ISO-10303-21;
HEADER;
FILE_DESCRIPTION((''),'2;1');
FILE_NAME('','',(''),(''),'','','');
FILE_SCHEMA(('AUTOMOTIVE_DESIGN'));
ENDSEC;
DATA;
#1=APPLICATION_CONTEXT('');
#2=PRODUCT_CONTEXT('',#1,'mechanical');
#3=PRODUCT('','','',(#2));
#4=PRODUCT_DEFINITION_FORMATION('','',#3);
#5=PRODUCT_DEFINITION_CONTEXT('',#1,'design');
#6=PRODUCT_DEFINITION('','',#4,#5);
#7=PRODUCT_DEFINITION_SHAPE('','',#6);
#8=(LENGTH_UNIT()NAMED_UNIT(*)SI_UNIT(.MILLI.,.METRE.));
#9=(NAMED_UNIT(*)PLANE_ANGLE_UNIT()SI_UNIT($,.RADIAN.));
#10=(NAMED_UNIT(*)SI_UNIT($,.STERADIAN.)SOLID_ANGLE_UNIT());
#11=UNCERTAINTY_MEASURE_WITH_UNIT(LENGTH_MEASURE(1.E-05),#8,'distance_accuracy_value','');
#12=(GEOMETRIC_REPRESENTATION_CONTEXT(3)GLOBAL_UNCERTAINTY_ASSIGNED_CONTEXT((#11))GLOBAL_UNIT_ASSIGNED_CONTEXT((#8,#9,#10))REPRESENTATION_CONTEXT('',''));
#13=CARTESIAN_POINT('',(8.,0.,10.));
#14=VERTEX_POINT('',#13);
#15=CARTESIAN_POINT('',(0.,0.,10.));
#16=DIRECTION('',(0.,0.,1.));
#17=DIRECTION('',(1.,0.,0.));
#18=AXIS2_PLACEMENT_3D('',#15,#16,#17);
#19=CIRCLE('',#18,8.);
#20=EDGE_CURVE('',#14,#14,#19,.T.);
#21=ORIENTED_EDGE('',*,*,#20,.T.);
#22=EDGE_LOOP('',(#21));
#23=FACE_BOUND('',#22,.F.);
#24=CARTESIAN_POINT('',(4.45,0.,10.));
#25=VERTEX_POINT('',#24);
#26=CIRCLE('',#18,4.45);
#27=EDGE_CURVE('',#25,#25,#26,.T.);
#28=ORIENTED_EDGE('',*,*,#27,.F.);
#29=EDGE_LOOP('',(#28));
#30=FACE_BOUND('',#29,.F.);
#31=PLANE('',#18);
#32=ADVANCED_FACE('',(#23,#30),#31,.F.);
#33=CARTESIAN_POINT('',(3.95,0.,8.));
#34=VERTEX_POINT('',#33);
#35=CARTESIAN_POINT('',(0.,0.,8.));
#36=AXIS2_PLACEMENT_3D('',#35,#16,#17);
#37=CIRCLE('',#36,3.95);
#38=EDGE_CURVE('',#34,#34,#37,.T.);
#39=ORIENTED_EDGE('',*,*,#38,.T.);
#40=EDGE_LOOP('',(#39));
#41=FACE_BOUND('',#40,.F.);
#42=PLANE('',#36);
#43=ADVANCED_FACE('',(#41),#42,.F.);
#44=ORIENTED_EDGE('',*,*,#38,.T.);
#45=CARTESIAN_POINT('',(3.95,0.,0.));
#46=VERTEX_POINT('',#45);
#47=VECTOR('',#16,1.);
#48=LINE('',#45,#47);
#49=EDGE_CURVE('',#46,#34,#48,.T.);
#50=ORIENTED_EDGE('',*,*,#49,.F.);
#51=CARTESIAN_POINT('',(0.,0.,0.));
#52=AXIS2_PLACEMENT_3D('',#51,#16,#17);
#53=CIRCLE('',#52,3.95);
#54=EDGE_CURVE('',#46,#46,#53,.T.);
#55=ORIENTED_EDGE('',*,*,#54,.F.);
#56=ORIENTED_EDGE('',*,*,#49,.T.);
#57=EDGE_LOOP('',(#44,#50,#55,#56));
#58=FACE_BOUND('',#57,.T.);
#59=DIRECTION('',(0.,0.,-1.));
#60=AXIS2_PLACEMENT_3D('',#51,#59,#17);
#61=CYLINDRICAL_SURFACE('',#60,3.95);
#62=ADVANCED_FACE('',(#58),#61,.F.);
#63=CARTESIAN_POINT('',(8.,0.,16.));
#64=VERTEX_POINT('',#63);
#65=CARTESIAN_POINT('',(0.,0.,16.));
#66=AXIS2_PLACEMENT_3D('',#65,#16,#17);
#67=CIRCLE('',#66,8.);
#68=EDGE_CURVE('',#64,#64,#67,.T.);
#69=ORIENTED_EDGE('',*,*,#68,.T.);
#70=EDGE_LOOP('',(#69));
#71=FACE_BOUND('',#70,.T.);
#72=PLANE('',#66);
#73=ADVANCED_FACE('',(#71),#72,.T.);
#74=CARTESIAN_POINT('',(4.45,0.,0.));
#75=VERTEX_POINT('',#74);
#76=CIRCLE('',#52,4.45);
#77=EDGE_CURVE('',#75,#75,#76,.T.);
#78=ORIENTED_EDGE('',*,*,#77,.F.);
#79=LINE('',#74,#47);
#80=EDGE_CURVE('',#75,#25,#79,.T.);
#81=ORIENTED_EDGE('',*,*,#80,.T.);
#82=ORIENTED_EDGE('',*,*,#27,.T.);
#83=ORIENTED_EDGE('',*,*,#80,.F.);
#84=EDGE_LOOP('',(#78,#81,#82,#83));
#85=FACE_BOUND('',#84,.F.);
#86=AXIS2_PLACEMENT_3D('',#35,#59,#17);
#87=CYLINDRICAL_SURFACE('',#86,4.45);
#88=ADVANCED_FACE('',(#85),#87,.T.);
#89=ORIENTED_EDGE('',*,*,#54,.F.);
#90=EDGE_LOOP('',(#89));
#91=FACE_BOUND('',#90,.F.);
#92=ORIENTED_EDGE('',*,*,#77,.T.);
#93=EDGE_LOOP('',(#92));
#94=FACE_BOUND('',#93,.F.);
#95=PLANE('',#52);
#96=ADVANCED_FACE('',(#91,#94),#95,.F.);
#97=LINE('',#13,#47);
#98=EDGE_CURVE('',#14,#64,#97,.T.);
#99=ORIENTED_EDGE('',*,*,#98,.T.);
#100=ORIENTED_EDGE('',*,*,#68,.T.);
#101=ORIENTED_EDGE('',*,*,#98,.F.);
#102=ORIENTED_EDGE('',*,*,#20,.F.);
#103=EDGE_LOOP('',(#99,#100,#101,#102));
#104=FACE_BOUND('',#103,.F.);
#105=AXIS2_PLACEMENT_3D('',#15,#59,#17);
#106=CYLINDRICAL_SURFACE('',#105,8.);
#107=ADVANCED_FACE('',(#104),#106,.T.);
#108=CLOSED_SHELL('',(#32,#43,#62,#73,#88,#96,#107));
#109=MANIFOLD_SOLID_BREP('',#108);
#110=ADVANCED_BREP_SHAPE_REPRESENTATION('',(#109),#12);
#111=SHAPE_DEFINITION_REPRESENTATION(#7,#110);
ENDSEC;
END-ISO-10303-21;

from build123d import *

# Parameters (mm, degrees)
F0_R     = 4.45
F0_R_2   = 3.95
F1_DEPTH = 8
F2_R     = 4.45
F3_DEPTH = 2
F4_R     = 8
F5_DEPTH = 6


# Not quite as in the source:
# - a feature names something its author has since deleted; it is built from what else it names


with BuildPart() as f1:
    # F0 (on Top) → F1 (new body)
    with BuildSketch(Plane.XY):
        Circle(F0_R)
        Circle(F0_R_2, mode=Mode.SUBTRACT)
    extrude(amount=F1_DEPTH)

    # F2 (on face) → F3 (join)
    with BuildSketch(Plane.XY.offset(8)):
        Circle(F2_R)
    extrude(amount=F3_DEPTH)

    # F4 (on face) → F5 (join)
    with BuildSketch(Plane.XY.offset(10)):
        Circle(F4_R)
    extrude(amount=F5_DEPTH)


solid = f1.part
